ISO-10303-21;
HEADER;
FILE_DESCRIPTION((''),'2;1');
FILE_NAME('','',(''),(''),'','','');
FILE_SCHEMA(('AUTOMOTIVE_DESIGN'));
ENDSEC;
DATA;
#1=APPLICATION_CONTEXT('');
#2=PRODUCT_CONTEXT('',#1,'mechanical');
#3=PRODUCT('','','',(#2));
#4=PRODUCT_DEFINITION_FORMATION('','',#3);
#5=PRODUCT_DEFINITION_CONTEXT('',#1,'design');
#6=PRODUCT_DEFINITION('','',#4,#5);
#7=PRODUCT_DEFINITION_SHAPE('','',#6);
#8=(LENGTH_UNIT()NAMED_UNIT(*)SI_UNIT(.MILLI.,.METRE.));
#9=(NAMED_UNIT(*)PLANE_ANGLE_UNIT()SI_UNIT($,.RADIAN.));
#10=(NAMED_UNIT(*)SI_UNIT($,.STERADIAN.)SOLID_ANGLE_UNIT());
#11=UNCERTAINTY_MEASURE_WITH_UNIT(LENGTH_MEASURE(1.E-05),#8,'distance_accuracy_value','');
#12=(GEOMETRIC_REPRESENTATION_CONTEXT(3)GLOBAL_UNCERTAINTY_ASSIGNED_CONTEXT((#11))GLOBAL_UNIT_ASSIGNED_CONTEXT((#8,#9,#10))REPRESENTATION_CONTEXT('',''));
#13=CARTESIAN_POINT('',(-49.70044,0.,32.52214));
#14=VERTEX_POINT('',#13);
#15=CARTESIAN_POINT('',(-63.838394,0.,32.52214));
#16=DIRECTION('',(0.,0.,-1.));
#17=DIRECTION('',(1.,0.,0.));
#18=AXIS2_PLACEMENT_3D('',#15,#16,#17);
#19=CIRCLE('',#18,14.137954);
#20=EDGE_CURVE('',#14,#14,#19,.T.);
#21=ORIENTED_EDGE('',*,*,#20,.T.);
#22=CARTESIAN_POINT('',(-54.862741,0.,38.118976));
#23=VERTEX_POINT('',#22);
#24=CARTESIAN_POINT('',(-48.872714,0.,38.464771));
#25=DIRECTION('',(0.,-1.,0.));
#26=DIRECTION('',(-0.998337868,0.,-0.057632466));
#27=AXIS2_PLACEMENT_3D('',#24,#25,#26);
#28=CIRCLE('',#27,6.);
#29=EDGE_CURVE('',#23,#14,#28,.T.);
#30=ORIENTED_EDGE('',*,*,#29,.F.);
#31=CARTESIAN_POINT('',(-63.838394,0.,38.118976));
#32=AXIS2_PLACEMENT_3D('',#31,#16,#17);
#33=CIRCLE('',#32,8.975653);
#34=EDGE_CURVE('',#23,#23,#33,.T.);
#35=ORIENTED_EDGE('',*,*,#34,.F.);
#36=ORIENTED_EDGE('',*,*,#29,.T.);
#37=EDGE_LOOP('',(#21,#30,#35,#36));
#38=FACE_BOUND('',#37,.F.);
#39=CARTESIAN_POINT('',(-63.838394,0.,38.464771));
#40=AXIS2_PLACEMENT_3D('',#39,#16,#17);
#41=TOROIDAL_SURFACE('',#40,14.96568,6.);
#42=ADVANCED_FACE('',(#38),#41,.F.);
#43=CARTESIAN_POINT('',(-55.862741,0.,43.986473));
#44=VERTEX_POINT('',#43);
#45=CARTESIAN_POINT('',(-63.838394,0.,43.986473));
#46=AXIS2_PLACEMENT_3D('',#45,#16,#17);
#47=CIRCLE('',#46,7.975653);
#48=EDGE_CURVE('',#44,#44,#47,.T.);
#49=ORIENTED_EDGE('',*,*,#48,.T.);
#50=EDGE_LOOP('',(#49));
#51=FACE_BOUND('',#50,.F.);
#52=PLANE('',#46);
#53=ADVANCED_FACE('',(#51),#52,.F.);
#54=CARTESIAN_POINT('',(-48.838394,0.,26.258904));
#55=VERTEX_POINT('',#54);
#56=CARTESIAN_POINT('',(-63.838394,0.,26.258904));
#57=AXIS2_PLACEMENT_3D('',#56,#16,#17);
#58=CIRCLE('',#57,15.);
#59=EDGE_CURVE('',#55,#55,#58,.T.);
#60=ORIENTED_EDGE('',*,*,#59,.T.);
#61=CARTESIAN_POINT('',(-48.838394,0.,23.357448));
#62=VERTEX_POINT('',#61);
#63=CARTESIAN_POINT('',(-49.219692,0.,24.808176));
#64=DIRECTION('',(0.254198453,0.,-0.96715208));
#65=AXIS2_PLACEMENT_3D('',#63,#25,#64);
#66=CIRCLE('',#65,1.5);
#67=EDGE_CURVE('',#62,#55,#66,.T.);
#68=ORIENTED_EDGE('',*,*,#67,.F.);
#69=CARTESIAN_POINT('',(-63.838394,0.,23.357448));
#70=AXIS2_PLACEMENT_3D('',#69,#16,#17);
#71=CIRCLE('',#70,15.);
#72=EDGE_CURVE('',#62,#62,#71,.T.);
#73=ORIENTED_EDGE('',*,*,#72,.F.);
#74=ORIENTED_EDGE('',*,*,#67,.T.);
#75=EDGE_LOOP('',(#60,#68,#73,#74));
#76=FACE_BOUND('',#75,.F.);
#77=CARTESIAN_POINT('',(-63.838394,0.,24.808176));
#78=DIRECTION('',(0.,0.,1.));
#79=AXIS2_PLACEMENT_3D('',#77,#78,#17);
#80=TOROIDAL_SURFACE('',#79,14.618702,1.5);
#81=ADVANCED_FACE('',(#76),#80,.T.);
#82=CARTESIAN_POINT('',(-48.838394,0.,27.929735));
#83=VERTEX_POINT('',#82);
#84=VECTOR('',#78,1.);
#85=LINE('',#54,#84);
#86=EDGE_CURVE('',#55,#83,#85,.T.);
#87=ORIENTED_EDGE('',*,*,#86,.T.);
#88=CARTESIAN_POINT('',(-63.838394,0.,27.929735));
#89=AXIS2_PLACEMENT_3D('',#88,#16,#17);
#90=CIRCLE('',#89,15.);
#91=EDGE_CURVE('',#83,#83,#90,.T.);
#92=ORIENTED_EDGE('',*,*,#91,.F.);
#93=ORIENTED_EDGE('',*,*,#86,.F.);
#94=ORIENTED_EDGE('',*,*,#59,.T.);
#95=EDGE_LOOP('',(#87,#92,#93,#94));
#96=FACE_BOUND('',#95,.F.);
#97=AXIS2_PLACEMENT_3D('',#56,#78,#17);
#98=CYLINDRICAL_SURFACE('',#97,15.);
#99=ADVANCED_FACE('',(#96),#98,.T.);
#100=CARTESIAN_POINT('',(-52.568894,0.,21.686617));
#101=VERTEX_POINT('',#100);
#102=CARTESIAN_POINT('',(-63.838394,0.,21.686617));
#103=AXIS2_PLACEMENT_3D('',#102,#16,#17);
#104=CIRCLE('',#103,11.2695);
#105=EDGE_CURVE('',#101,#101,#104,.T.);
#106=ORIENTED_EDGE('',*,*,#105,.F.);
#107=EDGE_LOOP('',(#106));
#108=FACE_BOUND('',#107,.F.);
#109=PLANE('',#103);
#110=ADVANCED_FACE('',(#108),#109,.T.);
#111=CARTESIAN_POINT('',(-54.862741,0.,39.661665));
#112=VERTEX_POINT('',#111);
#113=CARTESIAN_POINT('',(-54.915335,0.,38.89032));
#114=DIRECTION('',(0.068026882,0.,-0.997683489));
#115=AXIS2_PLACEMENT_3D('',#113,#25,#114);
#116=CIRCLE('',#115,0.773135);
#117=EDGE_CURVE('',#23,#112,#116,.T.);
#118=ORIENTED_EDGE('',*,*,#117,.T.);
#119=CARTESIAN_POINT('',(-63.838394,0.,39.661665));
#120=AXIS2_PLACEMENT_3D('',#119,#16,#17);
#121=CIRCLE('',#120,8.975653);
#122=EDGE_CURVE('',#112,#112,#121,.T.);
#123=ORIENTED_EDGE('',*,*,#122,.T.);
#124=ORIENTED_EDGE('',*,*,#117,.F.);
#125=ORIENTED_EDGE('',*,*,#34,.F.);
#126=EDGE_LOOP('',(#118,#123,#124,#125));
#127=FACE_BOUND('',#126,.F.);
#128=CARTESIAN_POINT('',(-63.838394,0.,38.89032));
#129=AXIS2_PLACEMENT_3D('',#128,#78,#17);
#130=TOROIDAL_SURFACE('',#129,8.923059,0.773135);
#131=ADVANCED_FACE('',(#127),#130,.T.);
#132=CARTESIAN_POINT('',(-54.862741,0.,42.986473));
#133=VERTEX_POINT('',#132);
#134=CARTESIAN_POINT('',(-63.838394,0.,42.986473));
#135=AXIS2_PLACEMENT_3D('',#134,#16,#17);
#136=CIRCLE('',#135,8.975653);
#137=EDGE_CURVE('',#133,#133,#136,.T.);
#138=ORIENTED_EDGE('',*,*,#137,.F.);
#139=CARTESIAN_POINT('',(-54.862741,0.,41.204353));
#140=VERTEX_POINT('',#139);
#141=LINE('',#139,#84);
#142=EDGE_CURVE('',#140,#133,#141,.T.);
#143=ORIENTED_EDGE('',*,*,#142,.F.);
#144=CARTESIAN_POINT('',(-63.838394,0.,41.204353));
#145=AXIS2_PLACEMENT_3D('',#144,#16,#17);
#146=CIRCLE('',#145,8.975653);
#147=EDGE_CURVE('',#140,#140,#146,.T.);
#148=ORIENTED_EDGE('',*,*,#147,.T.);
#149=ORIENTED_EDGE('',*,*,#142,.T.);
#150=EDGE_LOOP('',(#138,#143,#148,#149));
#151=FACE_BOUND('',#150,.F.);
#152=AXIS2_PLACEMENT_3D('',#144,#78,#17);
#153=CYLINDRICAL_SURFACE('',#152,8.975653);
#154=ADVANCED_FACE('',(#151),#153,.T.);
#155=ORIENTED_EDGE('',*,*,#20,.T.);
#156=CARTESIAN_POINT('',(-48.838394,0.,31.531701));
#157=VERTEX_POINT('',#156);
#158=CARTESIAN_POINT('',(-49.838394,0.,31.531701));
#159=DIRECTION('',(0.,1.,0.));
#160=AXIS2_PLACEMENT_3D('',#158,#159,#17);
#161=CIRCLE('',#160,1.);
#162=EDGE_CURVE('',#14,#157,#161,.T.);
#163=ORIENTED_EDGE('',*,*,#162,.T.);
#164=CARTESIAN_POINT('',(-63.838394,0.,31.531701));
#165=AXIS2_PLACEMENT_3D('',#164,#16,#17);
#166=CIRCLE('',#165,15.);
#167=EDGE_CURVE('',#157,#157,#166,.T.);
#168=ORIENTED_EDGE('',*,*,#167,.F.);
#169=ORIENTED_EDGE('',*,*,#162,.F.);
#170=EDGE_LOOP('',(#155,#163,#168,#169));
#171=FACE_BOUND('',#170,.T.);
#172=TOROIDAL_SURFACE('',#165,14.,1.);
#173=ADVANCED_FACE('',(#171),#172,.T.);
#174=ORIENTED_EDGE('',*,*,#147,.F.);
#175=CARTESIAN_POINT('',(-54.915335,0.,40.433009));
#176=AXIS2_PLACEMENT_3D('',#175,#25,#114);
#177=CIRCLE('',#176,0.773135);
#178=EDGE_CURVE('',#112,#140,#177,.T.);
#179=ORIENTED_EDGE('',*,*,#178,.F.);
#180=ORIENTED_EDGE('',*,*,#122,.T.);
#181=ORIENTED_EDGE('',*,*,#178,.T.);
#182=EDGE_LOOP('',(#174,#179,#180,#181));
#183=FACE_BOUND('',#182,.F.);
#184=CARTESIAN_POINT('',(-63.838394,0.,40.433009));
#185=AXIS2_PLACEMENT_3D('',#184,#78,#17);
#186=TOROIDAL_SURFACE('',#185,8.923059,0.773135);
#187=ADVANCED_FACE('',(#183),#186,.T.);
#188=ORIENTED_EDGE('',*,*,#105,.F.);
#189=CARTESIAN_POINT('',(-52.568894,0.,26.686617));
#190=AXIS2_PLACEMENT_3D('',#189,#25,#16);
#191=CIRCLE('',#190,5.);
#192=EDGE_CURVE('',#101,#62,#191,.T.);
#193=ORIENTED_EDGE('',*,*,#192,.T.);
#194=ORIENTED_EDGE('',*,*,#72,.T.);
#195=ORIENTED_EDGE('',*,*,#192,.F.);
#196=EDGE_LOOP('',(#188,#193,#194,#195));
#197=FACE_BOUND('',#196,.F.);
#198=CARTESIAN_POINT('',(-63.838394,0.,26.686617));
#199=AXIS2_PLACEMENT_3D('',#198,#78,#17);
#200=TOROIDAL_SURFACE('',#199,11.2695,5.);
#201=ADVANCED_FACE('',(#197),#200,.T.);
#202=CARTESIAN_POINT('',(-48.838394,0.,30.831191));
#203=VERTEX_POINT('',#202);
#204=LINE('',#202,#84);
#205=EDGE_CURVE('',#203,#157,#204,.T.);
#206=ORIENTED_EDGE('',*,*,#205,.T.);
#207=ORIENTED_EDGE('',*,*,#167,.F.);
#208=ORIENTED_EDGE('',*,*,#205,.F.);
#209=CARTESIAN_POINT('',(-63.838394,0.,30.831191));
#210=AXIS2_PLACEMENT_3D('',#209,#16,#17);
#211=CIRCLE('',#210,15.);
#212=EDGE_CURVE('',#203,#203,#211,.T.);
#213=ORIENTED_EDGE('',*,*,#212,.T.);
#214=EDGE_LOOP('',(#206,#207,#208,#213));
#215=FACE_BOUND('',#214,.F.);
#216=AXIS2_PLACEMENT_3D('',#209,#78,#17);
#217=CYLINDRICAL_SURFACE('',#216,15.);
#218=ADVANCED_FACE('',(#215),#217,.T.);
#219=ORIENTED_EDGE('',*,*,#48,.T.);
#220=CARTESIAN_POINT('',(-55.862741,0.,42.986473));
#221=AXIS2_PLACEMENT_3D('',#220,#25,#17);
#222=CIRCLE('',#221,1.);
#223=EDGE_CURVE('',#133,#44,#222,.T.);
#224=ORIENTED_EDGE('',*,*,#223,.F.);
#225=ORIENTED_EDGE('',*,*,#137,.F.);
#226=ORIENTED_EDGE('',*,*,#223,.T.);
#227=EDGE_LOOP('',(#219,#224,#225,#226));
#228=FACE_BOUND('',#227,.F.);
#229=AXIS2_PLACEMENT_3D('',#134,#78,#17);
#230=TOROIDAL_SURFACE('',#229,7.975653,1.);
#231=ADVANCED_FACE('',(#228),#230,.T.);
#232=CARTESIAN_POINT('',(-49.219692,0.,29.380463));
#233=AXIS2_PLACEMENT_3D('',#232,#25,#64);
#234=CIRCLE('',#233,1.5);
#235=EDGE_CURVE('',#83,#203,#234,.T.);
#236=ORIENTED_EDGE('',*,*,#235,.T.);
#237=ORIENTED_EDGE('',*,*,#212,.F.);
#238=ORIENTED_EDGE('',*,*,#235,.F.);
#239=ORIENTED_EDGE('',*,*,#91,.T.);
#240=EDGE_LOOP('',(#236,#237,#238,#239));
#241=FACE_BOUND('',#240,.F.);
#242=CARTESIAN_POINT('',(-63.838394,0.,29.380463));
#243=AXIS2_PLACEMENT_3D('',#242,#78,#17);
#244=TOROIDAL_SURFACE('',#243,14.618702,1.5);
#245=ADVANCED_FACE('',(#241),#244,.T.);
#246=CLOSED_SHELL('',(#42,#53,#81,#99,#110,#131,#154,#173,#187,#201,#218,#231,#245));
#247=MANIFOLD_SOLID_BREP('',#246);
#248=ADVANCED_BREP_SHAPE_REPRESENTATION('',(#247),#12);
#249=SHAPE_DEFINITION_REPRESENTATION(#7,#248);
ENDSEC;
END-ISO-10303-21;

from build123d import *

# Parameters (mm, degrees)
F3_R = 1
F5_R = 1


# Not quite as in the source:
# - a fillet or chamfer that OpenCascade refuses, or shapes differently, is made with other operations: its cross-section is extruded or revolved along the edge and cut away or added


with BuildPart() as f1:
    # F0 (on Front) → F1 (revolve)
    with BuildSketch(Plane.XZ):
        with BuildLine():
            Line((-54.8627413809, 43.9864732325), (-63.8383940968, 43.9864732325))
            Line((-63.8383940968, 43.9864732325), (-63.8383940968, 21.686617285))
            Line((-63.8383940968, 21.686617285), (-48.8383940968, 21.686617285))
            Line((-48.8383940968, 21.686617285), (-48.8383940968, 23.3574478392))
            ThreePointArc((-48.8383940968, 23.3574478392), (-47.7196917759, 24.8081759598), (-48.8383940968, 26.2589040804))
            Line((-48.8383940968, 26.2589040804), (-48.8383940968, 27.9297346346))
            ThreePointArc((-48.8383940968, 27.9297346346), (-47.7196917759, 29.3804627552), (-48.8383940968, 30.8311908759))
            Line((-48.8383940968, 30.8311908759), (-48.8383940968, 32.5317010283))
            Line((-48.8383940968, 32.5317010283), (-54.8627413809, 32.5317010283))
            Line((-54.8627413809, 32.5317010283), (-54.8627413809, 38.1189764225))
            ThreePointArc((-54.8627413809, 38.1189764225), (-54.1422003229, 38.8903204691), (-54.8627413809, 39.6616645157))
            ThreePointArc((-54.8627413809, 39.6616645157), (-54.1422003229, 40.4330085623), (-54.8627413809, 41.2043526089))
            Line((-54.8627413809, 41.2043526089), (-54.8627413809, 43.9864732325))
        make_face()
    revolve(axis=Axis((-63.8383940968, 0, 32.8365452588), (0, 0, -1)))

    # F2: fillet of radius 5 on 1 edges, made by hand

    # F2_s1 → F2_t2 (revolve, cut)
    with BuildSketch(Plane.XZ):
        with BuildLine():
            ThreePointArc((-52.5688941707, 21.686617285), (-50.525104459, 22.1234031092), (-48.8383940968, 23.3574478392))
            Line((-48.8383940968, 23.3574478392), (-48.8383940968, 21.686617285))
            Line((-48.8383940968, 21.686617285), (-52.5688941707, 21.686617285))
        make_face()
    revolve(axis=Axis((-63.8383940968, 0, 21.686617285), (0, 0, -1)), mode=Mode.SUBTRACT)

    # F3
    f3_edges = [f1.edges().sort_by_distance(p)[0] for p in [
        (-78.838394, 0, 32.531701),
    ]]
    fillet(f3_edges, radius=F3_R)

    # F4: fillet of radius 6 on 1 edges, made by hand

    # F4_s1 → F4_t2 (revolve)
    with BuildSketch(Plane.XZ):
        with BuildLine():
            ThreePointArc((-49.7004398219, 32.5221396272), (-53.2831091702, 34.39679679), (-54.8627413809, 38.1189764225))
            Line((-54.8627413809, 38.1189764225), (-55.4617441018, 38.0843969428))
            ThreePointArc((-55.4617441018, 38.0843969428), (-55.4627413809, 35.3253387254), (-55.4627413809, 32.5317010283))
            Line((-55.4627413809, 32.5317010283), (-54.8627413809, 31.9317010283))
            ThreePointArc((-54.8627413809, 31.9317010283), (-49.8383940968, 31.9317010283), (-49.7832123868, 31.9278764679))
            Line((-49.7832123868, 31.9278764679), (-49.7004398219, 32.5221396272))
        make_face()
    revolve(axis=Axis((-63.8383940968, 0, 32.5317010283), (0, 0, -1)))

    # F5
    f5_edges = [f1.edges().sort_by_distance(p)[0] for p in [
        (-72.814047, 0, 43.986473),
    ]]
    fillet(f5_edges, radius=F5_R)


solid = f1.part
